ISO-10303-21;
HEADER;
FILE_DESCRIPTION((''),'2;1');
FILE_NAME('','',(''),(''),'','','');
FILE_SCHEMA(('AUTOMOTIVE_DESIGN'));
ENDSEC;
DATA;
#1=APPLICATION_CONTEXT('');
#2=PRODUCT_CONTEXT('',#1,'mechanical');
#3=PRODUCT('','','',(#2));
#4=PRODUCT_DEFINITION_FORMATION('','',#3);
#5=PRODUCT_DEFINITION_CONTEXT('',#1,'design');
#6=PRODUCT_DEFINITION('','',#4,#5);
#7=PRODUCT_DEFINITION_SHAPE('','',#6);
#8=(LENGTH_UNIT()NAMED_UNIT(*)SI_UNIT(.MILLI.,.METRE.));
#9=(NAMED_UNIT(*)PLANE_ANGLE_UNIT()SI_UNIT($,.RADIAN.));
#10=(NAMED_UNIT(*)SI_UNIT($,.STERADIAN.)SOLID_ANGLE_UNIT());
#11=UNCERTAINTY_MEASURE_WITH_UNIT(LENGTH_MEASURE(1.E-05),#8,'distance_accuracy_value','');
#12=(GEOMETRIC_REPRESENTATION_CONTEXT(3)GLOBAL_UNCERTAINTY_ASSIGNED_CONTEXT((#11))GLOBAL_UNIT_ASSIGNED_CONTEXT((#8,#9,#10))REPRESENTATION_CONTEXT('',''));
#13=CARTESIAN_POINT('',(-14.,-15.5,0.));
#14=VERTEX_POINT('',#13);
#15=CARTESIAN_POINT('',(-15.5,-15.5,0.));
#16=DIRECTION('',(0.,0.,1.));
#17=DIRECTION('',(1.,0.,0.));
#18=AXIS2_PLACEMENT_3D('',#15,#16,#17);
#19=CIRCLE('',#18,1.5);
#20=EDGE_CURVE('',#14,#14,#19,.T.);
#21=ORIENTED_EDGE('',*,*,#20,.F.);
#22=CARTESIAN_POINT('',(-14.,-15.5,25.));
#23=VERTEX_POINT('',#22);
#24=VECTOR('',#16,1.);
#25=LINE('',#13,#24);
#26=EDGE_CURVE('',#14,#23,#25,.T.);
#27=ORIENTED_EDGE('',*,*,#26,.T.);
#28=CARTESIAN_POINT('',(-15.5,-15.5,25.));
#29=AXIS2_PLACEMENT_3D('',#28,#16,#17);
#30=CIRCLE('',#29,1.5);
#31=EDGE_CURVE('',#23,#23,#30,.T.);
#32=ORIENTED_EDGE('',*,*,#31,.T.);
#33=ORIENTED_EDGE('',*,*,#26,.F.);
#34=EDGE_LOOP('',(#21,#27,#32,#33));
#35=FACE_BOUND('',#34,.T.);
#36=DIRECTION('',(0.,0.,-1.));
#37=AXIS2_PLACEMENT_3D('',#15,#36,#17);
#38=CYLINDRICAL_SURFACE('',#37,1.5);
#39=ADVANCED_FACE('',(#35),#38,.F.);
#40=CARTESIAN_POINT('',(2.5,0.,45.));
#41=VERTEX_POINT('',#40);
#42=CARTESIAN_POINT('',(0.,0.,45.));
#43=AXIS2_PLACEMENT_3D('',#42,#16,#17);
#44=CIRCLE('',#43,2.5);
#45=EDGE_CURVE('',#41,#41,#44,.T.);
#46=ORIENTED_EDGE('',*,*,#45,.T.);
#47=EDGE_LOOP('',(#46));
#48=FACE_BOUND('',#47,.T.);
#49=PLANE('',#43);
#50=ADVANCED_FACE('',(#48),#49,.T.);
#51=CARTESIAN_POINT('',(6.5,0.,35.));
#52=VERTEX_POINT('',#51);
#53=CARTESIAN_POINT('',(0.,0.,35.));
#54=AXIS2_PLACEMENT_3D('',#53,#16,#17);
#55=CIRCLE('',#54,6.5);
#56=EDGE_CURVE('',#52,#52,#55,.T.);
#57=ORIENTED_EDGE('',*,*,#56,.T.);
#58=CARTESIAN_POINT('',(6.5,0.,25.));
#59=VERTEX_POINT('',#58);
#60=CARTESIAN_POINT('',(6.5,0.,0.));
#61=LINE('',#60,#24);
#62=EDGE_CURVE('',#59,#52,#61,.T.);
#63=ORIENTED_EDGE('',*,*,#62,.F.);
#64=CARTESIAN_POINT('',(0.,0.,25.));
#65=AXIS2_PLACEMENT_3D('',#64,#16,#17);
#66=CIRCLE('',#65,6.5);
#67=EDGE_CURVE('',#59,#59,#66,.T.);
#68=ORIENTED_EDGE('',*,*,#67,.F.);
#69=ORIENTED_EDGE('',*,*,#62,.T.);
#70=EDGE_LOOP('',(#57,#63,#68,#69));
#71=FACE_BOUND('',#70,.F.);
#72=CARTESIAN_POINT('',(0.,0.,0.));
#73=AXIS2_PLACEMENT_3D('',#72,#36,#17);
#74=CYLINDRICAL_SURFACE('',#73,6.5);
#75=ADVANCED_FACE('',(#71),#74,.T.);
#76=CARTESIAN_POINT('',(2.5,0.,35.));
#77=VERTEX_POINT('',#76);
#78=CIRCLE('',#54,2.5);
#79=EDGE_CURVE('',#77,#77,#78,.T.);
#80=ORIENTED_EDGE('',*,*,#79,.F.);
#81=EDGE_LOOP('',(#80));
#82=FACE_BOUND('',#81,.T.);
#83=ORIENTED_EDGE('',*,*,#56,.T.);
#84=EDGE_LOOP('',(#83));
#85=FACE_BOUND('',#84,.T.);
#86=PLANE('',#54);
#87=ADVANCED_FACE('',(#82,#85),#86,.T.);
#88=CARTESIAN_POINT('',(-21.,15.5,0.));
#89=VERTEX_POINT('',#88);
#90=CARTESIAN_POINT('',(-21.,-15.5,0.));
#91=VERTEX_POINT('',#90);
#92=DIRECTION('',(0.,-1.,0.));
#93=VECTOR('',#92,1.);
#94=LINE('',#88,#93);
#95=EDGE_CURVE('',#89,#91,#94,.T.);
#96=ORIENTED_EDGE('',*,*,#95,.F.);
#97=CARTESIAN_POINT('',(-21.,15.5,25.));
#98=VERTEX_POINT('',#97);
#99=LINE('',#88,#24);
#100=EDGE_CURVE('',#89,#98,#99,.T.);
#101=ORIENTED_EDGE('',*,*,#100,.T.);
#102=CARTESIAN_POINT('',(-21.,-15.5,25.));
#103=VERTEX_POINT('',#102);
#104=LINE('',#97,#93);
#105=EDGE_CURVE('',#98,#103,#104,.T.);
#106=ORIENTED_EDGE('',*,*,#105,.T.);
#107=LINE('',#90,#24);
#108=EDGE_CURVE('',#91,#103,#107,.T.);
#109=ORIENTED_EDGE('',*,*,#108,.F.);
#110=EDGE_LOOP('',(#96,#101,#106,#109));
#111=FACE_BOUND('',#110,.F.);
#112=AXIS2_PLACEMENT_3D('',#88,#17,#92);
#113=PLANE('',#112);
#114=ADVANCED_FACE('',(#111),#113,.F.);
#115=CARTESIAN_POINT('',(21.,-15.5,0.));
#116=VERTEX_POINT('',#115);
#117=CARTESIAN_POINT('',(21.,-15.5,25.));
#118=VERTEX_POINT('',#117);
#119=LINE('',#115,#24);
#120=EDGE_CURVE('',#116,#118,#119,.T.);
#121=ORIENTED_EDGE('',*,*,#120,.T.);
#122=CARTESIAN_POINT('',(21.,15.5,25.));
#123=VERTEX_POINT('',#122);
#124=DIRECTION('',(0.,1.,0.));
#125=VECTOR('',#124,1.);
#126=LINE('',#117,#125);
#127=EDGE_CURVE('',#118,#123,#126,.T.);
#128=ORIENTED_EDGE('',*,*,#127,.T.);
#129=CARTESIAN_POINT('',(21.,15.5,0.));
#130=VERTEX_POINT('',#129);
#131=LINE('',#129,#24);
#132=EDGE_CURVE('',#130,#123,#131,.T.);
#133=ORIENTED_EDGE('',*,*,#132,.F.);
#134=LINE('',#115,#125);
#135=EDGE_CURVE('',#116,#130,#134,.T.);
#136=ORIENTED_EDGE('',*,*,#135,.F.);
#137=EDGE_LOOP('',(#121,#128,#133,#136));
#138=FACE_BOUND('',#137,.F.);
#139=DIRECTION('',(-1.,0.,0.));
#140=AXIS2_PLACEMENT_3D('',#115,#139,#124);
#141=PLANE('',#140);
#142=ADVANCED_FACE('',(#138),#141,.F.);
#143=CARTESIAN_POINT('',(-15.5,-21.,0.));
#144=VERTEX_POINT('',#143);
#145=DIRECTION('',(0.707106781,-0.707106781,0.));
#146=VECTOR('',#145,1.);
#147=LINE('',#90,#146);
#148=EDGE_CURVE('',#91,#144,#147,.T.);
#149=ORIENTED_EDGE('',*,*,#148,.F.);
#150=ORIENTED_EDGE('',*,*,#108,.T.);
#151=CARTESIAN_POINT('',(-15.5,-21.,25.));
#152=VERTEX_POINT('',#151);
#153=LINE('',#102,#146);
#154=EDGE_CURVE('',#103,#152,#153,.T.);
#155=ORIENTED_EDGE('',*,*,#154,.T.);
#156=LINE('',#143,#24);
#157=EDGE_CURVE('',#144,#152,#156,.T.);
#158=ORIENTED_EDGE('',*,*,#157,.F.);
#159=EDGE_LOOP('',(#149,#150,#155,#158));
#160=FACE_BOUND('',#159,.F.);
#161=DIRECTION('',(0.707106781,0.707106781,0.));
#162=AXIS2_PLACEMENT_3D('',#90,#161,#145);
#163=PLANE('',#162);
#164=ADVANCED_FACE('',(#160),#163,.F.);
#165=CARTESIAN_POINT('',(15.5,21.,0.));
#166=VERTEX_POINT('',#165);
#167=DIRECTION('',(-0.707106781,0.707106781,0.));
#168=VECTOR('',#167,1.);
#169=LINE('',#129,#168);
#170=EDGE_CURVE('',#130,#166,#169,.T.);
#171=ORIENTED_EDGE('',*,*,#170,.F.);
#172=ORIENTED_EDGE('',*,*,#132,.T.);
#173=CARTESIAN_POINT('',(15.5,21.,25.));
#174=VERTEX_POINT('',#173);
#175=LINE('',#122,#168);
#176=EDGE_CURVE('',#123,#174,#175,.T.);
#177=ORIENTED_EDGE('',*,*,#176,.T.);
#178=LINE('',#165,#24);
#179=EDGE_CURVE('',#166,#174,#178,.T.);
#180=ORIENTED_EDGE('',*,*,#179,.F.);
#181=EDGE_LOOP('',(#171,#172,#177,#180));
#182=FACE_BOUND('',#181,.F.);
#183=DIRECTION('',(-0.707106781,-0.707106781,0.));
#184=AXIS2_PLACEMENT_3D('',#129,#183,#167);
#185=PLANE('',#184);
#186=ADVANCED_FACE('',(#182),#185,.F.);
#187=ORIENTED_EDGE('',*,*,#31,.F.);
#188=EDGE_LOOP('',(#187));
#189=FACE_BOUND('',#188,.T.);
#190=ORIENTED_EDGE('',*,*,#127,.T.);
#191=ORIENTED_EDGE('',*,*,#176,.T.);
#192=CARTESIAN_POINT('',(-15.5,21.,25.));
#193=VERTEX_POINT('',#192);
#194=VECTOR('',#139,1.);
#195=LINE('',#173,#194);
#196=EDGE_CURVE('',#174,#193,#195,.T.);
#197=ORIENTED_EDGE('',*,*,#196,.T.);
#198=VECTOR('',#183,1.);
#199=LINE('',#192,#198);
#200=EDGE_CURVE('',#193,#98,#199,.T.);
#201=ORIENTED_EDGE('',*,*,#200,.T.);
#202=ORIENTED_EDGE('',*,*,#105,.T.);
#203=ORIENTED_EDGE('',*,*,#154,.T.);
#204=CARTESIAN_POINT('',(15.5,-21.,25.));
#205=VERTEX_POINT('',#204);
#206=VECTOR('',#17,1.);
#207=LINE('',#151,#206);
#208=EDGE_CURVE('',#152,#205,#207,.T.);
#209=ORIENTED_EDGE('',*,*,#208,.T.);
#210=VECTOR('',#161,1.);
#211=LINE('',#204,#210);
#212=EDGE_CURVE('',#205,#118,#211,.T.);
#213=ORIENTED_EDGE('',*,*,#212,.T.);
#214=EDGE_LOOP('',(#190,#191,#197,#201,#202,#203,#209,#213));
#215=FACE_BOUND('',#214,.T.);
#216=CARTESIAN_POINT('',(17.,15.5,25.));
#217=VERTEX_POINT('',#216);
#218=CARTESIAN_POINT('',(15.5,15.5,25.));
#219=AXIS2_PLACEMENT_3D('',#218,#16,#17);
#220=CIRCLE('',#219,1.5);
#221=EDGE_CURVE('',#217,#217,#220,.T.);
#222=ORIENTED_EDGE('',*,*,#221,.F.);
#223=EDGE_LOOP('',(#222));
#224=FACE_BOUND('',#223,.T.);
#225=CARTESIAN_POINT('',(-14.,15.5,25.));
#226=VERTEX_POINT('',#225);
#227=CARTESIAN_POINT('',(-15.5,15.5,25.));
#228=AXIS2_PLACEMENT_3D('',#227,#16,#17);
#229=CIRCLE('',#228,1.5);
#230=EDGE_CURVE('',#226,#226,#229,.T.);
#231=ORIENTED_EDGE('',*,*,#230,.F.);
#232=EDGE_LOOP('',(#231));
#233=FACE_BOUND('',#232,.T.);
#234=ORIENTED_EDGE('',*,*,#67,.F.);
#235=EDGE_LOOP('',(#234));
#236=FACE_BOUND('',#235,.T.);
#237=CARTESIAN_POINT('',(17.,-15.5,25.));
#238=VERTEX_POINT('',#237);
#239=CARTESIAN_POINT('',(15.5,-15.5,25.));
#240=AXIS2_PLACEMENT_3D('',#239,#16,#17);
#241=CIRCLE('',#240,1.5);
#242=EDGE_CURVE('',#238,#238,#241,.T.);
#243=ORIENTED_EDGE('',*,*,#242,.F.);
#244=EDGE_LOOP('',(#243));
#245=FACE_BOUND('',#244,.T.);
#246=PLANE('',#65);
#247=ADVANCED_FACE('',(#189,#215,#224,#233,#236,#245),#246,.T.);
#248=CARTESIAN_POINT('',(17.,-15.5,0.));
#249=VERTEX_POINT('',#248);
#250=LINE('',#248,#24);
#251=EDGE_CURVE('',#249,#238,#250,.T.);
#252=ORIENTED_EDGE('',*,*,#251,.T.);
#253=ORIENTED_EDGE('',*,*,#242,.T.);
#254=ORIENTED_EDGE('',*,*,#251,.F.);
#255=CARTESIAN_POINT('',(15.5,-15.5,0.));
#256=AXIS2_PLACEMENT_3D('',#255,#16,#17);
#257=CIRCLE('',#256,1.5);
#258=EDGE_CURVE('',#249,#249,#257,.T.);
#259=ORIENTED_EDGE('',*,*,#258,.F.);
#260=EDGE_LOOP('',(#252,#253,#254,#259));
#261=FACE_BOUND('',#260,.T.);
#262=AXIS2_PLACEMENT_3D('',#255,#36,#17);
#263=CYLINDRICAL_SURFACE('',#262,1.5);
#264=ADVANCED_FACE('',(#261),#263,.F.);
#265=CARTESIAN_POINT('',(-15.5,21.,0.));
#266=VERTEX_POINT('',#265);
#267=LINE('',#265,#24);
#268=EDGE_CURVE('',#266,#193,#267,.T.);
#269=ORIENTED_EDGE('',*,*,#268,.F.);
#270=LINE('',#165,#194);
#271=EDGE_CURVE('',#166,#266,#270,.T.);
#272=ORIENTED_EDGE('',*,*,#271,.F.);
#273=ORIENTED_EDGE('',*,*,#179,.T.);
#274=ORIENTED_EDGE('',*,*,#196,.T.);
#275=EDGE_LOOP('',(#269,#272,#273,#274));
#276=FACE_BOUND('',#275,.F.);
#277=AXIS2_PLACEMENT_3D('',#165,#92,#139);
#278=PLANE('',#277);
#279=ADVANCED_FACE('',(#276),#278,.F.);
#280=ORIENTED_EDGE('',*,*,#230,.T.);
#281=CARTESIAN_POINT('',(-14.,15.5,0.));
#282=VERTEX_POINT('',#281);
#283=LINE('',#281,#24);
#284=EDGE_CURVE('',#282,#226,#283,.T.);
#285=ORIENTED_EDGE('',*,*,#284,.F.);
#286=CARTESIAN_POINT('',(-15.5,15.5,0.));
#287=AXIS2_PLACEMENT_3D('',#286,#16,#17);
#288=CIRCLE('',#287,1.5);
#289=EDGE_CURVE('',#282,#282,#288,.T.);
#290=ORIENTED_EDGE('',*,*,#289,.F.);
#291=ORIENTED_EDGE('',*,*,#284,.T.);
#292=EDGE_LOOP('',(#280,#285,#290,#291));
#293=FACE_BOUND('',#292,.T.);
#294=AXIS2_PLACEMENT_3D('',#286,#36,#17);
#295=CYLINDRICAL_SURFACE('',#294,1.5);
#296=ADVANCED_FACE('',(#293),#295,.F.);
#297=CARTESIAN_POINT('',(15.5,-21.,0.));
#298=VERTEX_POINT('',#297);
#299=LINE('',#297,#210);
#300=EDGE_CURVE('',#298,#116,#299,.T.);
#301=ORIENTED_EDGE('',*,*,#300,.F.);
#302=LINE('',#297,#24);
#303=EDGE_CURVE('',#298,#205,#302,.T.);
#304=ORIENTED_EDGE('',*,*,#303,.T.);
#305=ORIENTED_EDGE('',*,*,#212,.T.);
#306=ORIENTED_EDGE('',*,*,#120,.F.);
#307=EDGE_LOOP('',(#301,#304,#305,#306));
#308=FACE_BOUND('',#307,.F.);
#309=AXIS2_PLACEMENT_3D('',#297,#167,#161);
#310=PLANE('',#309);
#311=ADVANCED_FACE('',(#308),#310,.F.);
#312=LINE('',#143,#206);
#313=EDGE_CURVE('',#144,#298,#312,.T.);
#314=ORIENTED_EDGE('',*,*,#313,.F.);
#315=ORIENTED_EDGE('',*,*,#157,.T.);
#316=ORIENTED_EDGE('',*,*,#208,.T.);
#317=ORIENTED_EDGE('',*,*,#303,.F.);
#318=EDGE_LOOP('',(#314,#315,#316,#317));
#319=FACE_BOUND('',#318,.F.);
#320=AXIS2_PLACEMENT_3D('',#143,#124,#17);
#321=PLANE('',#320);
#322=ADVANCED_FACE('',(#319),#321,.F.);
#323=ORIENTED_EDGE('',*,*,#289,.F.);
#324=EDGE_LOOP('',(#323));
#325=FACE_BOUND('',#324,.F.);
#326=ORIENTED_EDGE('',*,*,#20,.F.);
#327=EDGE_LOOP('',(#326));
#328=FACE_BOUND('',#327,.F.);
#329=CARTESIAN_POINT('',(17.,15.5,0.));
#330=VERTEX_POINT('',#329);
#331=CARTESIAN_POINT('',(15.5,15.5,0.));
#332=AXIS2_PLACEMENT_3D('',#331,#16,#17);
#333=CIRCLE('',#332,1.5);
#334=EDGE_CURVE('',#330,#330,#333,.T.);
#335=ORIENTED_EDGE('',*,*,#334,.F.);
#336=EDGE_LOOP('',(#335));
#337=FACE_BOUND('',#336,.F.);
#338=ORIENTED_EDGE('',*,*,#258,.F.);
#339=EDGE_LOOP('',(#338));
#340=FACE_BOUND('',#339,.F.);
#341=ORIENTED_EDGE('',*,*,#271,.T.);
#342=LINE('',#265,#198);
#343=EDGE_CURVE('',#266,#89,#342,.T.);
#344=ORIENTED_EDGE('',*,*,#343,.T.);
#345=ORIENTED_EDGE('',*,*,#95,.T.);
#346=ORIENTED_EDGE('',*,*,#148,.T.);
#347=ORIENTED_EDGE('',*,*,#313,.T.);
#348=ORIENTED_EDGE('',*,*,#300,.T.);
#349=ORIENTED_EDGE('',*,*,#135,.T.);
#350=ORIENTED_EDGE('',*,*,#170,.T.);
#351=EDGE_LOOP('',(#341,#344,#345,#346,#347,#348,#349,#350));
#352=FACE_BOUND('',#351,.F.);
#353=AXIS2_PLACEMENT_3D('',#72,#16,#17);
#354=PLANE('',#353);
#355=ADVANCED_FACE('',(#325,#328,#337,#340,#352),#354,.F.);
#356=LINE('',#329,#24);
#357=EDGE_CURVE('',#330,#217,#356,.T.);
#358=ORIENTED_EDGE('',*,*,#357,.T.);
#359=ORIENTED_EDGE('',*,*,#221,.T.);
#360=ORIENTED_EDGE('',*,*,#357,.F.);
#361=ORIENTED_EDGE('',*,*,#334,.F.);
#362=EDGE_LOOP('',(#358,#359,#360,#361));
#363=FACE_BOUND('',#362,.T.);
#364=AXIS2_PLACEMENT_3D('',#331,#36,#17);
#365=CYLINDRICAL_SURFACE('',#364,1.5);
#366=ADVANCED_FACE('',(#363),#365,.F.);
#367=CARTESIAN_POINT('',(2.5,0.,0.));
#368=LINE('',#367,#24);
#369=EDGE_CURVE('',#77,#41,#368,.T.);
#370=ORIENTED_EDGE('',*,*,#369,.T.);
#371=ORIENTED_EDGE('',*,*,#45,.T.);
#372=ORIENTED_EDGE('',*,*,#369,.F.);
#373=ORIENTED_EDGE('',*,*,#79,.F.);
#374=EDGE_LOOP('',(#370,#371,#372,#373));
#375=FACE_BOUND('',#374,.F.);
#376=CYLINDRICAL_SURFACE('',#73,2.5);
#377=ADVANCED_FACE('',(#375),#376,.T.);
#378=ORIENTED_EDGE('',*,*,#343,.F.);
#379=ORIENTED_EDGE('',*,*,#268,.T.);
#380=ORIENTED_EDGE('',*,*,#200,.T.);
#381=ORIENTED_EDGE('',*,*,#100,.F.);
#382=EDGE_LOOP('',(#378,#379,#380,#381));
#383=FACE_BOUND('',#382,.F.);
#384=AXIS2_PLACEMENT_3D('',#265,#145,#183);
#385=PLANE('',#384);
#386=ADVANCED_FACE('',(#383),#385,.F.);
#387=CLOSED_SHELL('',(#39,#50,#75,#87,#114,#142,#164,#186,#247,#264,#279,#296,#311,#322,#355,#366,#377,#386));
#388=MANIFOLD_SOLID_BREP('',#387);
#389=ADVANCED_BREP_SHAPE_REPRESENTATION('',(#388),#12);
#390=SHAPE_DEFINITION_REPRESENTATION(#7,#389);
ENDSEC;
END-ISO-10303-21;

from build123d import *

# Parameters (mm, degrees)
F0_R     = 1.5
F0_R_2   = 6.5
F1_DEPTH = 25
F0_R_3   = 2.5
F2_DEPTH = 35
F3_DEPTH = 45


# Not quite as in the source:
# - a feature names something its author has since deleted; it is built from what else it names


with BuildPart() as f1:
    # F0 (on Top) → F1 (new body)
    with BuildSketch(Plane.XY):
        Polygon((15.5, 21), (-15.5, 21), (-21, 15.5), (-21, -15.5), (-15.5, -21), (15.5, -21), (21, -15.5), (21, 15.5), align=None)
        with Locations((-15.5, -15.5)):
            Circle(F0_R, mode=Mode.SUBTRACT)
        with Locations((15.5, -15.5)):
            Circle(F0_R, mode=Mode.SUBTRACT)
        with Locations((-15.5, 15.5)):
            Circle(F0_R, mode=Mode.SUBTRACT)
        Circle(F0_R_2, mode=Mode.SUBTRACT)
        with Locations((15.5, 15.5)):
            Circle(F0_R, mode=Mode.SUBTRACT)
    extrude(amount=F1_DEPTH)

    # F0 (on Top) → F2 (join)
    with BuildSketch(Plane.XY):
        Circle(F0_R_2)
        Circle(F0_R_3, mode=Mode.SUBTRACT)
    extrude(amount=F2_DEPTH)

    # F0 (on Top) → F3 (join)
    with BuildSketch(Plane.XY):
        Circle(F0_R_3)
    extrude(amount=F3_DEPTH)


solid = f1.part
